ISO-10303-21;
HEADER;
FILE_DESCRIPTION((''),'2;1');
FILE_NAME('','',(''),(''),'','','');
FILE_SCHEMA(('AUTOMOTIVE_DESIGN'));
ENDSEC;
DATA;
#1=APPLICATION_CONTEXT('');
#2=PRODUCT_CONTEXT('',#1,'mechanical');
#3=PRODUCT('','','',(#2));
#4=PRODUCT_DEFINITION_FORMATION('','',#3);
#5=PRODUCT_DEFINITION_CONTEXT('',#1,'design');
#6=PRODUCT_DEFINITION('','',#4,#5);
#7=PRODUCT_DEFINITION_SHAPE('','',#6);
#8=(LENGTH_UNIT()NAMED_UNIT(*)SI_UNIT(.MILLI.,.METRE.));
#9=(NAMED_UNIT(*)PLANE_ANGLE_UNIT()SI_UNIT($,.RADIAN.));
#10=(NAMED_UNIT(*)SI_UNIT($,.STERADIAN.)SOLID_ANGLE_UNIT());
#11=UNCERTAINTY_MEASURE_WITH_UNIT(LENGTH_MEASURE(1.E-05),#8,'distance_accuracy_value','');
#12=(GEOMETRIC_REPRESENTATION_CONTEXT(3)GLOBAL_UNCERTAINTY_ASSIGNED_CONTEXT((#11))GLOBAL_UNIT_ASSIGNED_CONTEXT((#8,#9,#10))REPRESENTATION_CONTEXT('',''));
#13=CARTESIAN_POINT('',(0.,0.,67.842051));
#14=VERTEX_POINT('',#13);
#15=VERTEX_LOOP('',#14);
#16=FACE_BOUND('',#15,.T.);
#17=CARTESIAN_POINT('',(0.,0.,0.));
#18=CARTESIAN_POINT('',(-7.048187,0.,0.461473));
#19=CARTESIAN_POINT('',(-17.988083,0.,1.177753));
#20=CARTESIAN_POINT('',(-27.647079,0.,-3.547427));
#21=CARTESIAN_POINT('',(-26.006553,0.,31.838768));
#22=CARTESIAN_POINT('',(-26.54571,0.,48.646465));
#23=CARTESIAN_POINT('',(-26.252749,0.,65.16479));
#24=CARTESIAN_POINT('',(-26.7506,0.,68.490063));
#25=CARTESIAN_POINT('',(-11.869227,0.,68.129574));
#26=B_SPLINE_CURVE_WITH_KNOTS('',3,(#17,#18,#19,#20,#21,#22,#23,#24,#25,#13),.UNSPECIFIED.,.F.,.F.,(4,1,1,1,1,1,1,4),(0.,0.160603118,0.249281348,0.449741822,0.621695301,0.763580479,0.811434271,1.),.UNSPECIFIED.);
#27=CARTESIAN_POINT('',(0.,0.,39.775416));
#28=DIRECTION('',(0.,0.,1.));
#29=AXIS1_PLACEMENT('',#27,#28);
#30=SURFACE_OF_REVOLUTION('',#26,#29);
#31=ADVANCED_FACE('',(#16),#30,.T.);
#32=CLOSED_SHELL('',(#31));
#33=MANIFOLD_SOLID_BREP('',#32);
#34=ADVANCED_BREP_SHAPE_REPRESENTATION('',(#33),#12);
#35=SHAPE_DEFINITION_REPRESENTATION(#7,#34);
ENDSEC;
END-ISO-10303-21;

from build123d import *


# Not quite as in the source:
# - the program builds the solid bodies; features that only make, move or delete a surface that nothing else refers to are left out


with BuildPart() as f1:
    # F0 (on Front) → F1 (revolve)
    with BuildSketch(Plane.XZ):
        with BuildLine():
            add(Edge.make_bspline(
                [(0, 0), (-7.0481867769, 0.4614734699), (-17.9880833627, 1.1777530178), (-27.6470794563, -3.5474272712), (-26.0065526211, 31.8387677014), (-26.5457101991, 48.6464645431), (-26.2527485063, 65.1647899221), (-26.7505995854, 68.4900627658), (-11.8692267951, 68.1295736907), (0, 67.8420513868)],
                knots=[0, 0, 0, 0, 0.1606031179, 0.2492813481, 0.4497418218, 0.6216953011, 0.7635804795, 0.8114342711, 1, 1, 1, 1], degree=3))
            Line((0, 0), (0, 67.8420513868))
        make_face()
    revolve(axis=Axis((0, 0, 39.775416255), (0, 0, 1)))


solid = f1.part
